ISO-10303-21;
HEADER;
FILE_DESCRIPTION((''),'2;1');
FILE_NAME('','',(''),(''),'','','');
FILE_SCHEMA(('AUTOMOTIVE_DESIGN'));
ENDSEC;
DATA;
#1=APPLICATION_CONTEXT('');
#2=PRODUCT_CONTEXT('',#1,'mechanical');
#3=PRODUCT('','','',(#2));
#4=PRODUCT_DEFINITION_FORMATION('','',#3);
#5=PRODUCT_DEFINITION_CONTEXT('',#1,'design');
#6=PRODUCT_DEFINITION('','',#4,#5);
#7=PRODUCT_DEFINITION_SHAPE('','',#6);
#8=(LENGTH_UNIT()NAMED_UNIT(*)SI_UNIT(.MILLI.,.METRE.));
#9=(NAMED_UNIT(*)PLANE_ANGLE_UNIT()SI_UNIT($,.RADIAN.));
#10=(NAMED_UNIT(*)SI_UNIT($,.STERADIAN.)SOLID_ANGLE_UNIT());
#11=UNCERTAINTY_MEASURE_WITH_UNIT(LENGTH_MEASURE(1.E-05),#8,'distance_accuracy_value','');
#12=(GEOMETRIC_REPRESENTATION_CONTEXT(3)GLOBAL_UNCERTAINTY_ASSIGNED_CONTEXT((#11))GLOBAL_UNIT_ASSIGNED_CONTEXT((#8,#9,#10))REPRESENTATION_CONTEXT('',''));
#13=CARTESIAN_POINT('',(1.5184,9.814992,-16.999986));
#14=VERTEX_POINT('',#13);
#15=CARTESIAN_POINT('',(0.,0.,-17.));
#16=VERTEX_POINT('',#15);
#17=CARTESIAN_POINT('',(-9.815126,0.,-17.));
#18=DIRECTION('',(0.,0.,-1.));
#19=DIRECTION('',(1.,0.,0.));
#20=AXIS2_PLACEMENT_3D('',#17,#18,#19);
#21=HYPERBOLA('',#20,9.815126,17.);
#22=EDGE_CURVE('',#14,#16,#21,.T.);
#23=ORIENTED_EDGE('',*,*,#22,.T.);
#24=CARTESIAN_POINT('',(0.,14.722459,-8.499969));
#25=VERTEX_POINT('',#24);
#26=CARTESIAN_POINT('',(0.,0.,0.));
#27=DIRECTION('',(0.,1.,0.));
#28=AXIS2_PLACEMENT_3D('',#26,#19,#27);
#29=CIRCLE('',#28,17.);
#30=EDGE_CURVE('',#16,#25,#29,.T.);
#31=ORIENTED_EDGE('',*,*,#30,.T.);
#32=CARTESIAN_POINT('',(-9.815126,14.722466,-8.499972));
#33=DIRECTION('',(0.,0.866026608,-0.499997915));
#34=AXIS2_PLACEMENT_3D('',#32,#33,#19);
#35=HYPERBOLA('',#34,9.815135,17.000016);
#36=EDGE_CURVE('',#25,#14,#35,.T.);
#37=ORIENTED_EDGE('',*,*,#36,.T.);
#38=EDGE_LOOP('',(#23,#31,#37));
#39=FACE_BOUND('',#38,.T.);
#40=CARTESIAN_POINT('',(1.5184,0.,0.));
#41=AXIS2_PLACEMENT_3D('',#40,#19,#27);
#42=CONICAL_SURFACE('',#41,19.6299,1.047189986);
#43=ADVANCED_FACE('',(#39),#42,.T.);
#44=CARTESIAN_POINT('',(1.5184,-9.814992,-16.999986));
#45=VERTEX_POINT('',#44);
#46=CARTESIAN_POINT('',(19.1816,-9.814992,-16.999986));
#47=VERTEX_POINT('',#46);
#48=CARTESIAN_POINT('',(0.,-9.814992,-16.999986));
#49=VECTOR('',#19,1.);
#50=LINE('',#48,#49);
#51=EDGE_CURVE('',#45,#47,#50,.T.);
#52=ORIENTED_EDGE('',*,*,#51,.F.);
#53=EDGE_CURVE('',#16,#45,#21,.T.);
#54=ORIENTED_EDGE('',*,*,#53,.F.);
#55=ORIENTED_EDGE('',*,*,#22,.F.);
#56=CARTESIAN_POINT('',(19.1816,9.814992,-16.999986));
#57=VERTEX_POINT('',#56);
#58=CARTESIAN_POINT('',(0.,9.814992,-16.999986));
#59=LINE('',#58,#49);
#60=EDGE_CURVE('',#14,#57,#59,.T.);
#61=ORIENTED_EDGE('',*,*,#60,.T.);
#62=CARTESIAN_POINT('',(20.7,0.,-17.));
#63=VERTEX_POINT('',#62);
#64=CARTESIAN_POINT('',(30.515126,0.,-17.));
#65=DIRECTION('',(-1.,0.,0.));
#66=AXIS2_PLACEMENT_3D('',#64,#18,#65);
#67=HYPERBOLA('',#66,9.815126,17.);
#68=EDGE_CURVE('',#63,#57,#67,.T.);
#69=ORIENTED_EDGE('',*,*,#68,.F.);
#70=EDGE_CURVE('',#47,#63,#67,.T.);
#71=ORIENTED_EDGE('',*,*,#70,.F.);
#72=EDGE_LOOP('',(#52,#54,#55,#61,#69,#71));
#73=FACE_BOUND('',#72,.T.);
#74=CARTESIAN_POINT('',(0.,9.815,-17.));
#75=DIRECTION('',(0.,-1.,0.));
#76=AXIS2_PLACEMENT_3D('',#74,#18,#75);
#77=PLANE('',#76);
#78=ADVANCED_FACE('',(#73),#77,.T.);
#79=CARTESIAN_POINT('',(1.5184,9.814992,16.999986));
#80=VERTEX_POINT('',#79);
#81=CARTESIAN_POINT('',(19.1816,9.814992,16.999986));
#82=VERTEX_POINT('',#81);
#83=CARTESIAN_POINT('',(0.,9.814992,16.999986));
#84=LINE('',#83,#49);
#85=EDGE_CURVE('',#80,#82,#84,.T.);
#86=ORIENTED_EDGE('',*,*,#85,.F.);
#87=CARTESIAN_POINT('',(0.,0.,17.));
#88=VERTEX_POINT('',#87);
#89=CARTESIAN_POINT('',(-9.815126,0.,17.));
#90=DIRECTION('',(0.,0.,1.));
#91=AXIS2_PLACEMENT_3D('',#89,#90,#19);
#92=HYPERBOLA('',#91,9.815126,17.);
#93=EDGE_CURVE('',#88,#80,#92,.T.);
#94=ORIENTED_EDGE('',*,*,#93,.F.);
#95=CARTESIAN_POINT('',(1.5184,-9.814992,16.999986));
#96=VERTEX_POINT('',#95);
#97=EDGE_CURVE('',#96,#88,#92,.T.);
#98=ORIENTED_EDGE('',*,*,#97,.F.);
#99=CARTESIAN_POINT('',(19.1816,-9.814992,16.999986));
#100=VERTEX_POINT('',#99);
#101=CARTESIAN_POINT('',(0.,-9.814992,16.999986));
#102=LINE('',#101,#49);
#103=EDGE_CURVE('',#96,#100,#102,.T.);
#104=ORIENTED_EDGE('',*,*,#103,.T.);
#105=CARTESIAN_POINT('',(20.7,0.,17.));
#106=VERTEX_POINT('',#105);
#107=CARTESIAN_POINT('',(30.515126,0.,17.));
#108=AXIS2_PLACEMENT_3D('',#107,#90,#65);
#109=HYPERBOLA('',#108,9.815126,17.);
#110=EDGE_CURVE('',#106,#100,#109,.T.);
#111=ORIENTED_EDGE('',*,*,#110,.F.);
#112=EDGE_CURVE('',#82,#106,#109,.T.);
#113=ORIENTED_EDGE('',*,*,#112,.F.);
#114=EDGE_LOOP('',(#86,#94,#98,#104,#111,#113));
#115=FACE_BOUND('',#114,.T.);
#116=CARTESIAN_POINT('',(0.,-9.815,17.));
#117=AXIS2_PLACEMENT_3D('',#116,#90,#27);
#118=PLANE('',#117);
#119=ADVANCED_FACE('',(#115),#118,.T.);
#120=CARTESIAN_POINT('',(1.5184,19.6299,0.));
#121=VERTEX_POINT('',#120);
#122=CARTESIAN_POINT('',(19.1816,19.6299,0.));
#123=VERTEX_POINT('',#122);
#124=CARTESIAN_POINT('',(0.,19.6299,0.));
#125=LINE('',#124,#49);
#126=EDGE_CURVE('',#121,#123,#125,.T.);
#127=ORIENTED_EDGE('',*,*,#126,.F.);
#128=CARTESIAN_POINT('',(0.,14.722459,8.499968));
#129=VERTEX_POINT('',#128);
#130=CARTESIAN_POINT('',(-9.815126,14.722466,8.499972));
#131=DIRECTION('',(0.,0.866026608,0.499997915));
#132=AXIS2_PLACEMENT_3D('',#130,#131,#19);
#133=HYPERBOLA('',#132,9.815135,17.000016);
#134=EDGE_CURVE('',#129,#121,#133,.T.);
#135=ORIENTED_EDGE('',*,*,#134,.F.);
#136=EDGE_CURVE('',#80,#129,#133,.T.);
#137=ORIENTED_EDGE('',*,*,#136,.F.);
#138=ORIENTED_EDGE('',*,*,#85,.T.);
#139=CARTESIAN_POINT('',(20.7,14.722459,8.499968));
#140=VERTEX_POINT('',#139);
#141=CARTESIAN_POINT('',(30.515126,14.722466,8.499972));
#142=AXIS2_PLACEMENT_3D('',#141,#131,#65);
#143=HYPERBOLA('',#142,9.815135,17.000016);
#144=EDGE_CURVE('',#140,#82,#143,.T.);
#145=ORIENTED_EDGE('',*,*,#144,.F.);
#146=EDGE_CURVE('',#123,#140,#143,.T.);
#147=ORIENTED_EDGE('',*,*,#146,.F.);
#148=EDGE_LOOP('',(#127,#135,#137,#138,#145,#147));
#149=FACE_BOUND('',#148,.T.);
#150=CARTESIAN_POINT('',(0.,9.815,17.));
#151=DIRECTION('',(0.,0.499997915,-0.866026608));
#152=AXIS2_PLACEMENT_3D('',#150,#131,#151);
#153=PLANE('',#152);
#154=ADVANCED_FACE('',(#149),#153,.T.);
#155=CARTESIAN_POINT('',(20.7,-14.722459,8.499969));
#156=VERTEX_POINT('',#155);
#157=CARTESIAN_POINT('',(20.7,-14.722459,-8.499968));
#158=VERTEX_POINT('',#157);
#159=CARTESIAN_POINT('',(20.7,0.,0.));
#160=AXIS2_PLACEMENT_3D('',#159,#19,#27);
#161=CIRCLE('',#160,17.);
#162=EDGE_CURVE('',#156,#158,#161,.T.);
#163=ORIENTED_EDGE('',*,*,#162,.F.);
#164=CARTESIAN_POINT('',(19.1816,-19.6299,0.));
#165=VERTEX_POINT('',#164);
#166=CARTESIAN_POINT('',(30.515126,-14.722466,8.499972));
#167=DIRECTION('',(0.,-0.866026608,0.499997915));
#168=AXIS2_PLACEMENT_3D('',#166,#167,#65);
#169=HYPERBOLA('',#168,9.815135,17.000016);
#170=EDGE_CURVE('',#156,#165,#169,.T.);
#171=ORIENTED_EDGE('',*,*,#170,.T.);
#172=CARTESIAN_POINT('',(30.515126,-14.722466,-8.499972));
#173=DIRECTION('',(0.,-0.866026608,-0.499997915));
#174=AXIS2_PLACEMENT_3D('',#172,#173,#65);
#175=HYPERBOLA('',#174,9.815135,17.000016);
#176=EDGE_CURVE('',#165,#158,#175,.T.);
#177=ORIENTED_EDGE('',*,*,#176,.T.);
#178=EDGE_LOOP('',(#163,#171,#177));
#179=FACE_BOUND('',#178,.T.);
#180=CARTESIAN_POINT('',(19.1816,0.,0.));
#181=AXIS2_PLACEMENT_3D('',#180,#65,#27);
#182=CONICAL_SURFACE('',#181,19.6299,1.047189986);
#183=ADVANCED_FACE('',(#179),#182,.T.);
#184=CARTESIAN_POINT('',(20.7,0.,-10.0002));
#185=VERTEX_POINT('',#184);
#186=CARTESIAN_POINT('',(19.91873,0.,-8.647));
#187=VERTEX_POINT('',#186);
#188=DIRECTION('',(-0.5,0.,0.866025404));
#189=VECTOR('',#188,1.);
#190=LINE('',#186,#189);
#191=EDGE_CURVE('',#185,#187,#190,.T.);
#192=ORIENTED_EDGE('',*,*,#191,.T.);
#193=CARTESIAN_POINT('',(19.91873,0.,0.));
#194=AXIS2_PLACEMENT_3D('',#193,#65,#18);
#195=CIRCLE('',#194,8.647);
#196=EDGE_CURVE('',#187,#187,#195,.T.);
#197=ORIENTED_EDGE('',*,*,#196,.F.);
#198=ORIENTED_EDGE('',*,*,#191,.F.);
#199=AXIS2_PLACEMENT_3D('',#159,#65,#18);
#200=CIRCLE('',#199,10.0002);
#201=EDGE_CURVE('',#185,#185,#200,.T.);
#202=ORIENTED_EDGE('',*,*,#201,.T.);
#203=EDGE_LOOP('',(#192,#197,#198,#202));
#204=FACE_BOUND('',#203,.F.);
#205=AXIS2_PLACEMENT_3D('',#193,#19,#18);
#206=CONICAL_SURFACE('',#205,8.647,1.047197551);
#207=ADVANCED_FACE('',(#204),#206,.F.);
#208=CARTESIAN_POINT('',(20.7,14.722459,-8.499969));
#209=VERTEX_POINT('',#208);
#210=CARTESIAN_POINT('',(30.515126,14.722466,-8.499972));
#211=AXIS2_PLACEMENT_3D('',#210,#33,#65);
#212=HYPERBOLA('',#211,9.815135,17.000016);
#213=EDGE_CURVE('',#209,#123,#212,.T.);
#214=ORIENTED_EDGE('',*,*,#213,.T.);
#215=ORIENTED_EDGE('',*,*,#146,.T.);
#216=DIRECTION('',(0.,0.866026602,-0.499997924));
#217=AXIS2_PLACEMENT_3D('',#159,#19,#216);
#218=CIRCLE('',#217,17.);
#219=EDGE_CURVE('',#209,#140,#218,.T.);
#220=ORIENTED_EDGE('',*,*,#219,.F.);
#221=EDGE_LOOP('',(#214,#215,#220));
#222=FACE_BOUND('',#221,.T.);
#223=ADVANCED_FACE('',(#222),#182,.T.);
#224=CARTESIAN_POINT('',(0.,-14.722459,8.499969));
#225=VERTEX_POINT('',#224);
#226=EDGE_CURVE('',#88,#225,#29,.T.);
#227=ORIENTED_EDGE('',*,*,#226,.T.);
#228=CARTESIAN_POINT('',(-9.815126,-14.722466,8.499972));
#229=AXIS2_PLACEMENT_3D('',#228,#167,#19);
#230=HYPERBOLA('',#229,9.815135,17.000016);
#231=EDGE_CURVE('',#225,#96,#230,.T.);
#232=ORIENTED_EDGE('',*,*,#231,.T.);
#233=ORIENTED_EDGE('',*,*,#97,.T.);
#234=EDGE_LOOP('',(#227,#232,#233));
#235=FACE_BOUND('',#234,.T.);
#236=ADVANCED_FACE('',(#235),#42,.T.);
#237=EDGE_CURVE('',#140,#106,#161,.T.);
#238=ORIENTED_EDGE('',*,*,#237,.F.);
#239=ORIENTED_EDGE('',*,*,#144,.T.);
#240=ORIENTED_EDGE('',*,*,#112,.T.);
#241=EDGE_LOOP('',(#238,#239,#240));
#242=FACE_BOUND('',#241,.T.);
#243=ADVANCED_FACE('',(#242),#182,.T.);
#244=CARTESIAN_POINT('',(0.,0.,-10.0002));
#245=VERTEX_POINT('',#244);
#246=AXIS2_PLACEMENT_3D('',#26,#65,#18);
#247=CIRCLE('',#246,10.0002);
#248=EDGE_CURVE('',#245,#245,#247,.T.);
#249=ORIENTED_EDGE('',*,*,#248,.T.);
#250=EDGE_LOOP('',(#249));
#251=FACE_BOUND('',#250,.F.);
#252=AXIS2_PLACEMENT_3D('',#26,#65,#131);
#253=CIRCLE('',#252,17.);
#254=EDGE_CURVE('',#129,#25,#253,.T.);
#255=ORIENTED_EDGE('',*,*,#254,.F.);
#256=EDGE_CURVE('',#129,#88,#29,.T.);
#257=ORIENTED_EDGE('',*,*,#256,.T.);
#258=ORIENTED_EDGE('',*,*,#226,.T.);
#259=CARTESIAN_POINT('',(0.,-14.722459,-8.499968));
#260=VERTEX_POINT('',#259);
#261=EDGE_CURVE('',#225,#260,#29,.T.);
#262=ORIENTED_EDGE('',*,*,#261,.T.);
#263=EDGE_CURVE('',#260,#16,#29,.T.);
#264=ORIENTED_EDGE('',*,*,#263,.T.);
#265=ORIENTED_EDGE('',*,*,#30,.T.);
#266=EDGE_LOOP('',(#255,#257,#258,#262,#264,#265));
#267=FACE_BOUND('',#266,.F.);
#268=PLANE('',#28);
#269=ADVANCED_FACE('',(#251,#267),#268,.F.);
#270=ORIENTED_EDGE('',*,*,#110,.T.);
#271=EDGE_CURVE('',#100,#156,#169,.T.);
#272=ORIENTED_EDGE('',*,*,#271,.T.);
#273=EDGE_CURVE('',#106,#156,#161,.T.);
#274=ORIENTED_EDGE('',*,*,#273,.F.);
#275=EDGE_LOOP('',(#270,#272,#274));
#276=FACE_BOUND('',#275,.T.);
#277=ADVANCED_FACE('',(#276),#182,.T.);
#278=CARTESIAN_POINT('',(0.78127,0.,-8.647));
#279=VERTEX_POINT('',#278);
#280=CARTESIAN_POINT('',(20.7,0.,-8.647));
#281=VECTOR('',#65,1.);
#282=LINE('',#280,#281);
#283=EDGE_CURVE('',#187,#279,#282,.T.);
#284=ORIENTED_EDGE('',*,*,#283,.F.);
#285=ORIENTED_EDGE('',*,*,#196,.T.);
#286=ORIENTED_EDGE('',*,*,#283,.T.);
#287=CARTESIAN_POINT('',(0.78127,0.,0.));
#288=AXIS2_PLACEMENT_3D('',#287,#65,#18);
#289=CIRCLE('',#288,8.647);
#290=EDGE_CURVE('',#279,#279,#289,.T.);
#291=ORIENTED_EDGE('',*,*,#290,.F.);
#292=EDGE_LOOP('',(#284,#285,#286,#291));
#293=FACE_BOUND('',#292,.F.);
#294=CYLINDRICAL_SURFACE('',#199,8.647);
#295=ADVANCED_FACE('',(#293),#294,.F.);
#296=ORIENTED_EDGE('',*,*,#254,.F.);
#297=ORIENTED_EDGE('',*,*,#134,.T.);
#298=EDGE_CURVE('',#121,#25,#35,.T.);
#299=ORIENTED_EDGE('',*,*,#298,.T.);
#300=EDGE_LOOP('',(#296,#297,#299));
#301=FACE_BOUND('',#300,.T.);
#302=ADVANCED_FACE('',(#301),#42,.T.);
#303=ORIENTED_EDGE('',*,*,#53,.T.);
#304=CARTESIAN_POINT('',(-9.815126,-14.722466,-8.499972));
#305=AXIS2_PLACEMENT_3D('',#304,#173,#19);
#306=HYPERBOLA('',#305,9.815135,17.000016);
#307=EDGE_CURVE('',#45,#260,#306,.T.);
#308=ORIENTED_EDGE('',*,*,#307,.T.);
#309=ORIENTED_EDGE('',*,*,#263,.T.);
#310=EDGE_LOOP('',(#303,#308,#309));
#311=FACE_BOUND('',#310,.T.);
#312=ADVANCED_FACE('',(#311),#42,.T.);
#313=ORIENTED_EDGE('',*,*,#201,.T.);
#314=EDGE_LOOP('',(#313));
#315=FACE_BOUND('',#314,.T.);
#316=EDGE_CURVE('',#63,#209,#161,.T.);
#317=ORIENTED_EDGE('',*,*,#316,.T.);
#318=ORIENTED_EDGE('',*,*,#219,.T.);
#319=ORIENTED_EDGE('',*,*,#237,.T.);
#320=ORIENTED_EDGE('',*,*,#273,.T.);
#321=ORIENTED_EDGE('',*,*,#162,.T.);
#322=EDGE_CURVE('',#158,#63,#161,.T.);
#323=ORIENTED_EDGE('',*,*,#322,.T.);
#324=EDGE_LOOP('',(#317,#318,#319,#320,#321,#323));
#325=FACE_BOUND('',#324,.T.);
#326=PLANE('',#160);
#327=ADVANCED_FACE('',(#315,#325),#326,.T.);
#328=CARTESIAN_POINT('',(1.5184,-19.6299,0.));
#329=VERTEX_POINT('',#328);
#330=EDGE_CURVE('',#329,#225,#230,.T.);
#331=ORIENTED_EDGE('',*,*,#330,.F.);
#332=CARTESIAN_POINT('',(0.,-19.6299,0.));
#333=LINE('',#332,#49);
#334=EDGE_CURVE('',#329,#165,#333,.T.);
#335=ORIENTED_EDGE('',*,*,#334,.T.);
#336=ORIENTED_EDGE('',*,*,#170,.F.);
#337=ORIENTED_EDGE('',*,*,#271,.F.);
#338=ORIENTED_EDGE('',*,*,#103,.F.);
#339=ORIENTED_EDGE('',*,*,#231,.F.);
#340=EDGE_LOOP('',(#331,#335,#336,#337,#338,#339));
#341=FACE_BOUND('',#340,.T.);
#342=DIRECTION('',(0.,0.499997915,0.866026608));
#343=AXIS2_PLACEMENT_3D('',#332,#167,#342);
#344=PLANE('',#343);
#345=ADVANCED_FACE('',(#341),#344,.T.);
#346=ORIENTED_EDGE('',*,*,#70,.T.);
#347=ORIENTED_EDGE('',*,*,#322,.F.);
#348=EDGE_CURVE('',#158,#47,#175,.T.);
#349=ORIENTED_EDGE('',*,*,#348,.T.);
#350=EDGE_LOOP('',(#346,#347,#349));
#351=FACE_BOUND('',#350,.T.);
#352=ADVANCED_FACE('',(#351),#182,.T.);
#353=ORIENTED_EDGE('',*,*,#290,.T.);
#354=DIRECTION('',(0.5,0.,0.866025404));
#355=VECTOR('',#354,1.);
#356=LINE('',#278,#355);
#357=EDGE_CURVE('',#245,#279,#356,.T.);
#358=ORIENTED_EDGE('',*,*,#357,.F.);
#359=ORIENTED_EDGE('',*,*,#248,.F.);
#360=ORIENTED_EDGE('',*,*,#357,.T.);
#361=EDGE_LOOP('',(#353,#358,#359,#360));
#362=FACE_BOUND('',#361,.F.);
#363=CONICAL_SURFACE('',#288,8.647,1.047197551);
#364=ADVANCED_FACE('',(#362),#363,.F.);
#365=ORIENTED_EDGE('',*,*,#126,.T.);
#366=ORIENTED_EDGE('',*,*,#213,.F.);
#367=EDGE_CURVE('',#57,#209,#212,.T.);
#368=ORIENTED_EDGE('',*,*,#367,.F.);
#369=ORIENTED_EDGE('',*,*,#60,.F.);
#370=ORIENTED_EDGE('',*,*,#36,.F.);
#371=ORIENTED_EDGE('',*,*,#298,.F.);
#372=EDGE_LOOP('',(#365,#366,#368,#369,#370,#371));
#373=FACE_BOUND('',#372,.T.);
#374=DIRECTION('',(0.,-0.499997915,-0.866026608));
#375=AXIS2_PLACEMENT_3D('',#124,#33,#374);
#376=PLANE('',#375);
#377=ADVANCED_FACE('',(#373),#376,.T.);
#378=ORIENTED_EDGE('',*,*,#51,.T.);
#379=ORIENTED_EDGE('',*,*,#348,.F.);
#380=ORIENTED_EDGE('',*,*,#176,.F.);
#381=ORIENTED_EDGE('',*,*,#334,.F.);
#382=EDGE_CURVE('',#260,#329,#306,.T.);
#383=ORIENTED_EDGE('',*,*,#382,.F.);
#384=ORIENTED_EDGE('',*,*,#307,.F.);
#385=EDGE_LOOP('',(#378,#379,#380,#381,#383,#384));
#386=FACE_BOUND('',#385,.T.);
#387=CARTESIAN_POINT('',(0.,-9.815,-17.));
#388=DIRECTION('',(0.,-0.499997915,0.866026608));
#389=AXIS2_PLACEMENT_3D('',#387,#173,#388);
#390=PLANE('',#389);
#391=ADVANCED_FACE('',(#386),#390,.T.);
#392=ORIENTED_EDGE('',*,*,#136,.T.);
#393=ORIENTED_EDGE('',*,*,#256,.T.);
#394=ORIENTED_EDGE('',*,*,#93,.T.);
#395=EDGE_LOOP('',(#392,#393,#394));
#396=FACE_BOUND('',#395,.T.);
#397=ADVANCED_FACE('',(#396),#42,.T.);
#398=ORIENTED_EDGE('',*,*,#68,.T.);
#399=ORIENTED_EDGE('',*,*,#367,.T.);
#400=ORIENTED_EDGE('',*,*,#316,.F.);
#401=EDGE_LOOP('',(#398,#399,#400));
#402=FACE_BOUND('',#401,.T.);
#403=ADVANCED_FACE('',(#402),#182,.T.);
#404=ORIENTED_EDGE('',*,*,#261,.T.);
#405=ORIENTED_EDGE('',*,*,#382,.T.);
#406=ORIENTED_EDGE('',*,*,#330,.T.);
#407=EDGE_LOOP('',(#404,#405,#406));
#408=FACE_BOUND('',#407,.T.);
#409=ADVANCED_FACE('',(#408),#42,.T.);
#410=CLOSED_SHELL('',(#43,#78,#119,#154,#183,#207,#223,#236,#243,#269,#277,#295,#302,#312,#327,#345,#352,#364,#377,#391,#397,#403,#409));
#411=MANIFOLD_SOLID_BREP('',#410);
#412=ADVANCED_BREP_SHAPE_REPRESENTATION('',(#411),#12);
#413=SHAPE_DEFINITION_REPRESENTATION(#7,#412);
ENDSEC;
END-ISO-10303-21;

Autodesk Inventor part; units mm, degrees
ref_plane "YZ Plane" through (0, 0, 0) normal (1, 0, 0) x (0, 1, 0)
ref_plane "XZ Plane" through (0, 0, 0) normal (0, 1, 0) x (-1, 0, 0)
sketch "Sketch1" plane through (0, 0, 0) normal (1, 0, 0) x (0, 1, 0)
  line L0 (-19.6299, 0) -> (-9.815, 17)
  line L1 (-9.815, 17) -> (9.815, 17)
  line L2 (9.815, 17) -> (19.6299, 0)
  line L3 (19.6299, 0) -> (9.815, -17)
  line L4 (9.815, -17) -> (-9.815, -17)
  line L5 (-9.815, -17) -> (-19.6299, 0)
  point P0 (0, 0)
  point P1 (0, 0)
  dimension "d0" = 39.2598
extrude "Body" add sketch "Sketch1" along normal blind 20.7
sketch "Sketch2" plane through (0, 0, 0) normal (0, 0, 1) x (1, 0, 0)
  line L0 (0, 9.815) -> (0, 19.6299) projected
  line L1 (0, 19.6299) -> (20.7, 19.6299) projected
  line L2 (20.7, 9.815) -> (20.7, 19.6299) projected
  line L3 (-4.14, 0) -> (24.84, 0) projected
  line L4 (1.5184, 19.6299) -> (0, 17)
  line L5 (19.1816, 19.6299) -> (20.7, 17)
  dimension "d3" = 30
  dimension "d4" = 30
  dimension "d5" = 34
  dimension "d6" = 34
revolve "Chamfer1" cut sketch "Sketch2" angle 360 about axis through (-10, 0, 0) along (1, 0, 0)
sketch "Sketch3" plane through (20.7, 0, 0) normal (1, 0, 0) x (0, 0, -1)
  arc A0 (-8.5, -14.7224) -> (8.5, -14.7224) centre (0, 0) ccw projected
hole "Thread" at (20.7, 0, 0) direction (-1, 0, 0) diameter 17.294 end through all thread size "M20x2.5" class "6H" standard "ANSI Metric M Profile"
chamfer "Chamfer2" distance 1.3532 angle 30 1 edges at (20.7, 0, 8.647) measured on face at (20.7, 14.1326, -0.3474)
chamfer "Chamfer3" distance 1.3532 angle 30 1 edges at (0, 0, 8.647) measured on face at (0, 14.1326, -0.3474)
ref_plane "Work Plane1" through (-35.2091, 0, 0) normal (0, -0.8660254, -0.5) x (1, 0, 0)
equation "\"d0\" = 1.1547 * SW"
equation "\"d1\" = KOH"
equation "\"d3\" = ANG1"
equation "\"d4\" = ANG2"
equation "\"d5\" = SW0"
equation "\"d6\" = SW01"
equation "\"d8\" = -0.5 * GD1 + 0.5 * NND"
equation "\"d40\" = -0.5 * GD1 + 0.5 * NND"
equation "\"d10\" = -0.5 * GD1 + 0.5 * NND"
equation "\"d41\" = -0.5 * GD1 + 0.5 * NND"
equation "\"ANG1\" = 30deg"
equation "\"ANG2\" = 30deg"
equation "\"KOH\" = 20.7"
equation "\"SW\" = 34"
equation "\"SW0\" = SW"
equation "\"SW01\" = SW"
equation "\"GUL\" = 0.541266 * PTC"
equation "\"TOA\" = 30deg"
equation "\"PTC\" = 2.5"
equation "\"E0\" = 1.155 * SW"
equation "\"GAL\" = 0.541266 * PTC"
equation "\"SD2\" = 31.4"
equation "\"WFT\" = 0"
equation "\"GD1\" = 17.293671"
equation "\"NND\" = 20"
properties part number "ANSI B18.2.4.6M - M20 x 2.5" material "Steel, Mild"
